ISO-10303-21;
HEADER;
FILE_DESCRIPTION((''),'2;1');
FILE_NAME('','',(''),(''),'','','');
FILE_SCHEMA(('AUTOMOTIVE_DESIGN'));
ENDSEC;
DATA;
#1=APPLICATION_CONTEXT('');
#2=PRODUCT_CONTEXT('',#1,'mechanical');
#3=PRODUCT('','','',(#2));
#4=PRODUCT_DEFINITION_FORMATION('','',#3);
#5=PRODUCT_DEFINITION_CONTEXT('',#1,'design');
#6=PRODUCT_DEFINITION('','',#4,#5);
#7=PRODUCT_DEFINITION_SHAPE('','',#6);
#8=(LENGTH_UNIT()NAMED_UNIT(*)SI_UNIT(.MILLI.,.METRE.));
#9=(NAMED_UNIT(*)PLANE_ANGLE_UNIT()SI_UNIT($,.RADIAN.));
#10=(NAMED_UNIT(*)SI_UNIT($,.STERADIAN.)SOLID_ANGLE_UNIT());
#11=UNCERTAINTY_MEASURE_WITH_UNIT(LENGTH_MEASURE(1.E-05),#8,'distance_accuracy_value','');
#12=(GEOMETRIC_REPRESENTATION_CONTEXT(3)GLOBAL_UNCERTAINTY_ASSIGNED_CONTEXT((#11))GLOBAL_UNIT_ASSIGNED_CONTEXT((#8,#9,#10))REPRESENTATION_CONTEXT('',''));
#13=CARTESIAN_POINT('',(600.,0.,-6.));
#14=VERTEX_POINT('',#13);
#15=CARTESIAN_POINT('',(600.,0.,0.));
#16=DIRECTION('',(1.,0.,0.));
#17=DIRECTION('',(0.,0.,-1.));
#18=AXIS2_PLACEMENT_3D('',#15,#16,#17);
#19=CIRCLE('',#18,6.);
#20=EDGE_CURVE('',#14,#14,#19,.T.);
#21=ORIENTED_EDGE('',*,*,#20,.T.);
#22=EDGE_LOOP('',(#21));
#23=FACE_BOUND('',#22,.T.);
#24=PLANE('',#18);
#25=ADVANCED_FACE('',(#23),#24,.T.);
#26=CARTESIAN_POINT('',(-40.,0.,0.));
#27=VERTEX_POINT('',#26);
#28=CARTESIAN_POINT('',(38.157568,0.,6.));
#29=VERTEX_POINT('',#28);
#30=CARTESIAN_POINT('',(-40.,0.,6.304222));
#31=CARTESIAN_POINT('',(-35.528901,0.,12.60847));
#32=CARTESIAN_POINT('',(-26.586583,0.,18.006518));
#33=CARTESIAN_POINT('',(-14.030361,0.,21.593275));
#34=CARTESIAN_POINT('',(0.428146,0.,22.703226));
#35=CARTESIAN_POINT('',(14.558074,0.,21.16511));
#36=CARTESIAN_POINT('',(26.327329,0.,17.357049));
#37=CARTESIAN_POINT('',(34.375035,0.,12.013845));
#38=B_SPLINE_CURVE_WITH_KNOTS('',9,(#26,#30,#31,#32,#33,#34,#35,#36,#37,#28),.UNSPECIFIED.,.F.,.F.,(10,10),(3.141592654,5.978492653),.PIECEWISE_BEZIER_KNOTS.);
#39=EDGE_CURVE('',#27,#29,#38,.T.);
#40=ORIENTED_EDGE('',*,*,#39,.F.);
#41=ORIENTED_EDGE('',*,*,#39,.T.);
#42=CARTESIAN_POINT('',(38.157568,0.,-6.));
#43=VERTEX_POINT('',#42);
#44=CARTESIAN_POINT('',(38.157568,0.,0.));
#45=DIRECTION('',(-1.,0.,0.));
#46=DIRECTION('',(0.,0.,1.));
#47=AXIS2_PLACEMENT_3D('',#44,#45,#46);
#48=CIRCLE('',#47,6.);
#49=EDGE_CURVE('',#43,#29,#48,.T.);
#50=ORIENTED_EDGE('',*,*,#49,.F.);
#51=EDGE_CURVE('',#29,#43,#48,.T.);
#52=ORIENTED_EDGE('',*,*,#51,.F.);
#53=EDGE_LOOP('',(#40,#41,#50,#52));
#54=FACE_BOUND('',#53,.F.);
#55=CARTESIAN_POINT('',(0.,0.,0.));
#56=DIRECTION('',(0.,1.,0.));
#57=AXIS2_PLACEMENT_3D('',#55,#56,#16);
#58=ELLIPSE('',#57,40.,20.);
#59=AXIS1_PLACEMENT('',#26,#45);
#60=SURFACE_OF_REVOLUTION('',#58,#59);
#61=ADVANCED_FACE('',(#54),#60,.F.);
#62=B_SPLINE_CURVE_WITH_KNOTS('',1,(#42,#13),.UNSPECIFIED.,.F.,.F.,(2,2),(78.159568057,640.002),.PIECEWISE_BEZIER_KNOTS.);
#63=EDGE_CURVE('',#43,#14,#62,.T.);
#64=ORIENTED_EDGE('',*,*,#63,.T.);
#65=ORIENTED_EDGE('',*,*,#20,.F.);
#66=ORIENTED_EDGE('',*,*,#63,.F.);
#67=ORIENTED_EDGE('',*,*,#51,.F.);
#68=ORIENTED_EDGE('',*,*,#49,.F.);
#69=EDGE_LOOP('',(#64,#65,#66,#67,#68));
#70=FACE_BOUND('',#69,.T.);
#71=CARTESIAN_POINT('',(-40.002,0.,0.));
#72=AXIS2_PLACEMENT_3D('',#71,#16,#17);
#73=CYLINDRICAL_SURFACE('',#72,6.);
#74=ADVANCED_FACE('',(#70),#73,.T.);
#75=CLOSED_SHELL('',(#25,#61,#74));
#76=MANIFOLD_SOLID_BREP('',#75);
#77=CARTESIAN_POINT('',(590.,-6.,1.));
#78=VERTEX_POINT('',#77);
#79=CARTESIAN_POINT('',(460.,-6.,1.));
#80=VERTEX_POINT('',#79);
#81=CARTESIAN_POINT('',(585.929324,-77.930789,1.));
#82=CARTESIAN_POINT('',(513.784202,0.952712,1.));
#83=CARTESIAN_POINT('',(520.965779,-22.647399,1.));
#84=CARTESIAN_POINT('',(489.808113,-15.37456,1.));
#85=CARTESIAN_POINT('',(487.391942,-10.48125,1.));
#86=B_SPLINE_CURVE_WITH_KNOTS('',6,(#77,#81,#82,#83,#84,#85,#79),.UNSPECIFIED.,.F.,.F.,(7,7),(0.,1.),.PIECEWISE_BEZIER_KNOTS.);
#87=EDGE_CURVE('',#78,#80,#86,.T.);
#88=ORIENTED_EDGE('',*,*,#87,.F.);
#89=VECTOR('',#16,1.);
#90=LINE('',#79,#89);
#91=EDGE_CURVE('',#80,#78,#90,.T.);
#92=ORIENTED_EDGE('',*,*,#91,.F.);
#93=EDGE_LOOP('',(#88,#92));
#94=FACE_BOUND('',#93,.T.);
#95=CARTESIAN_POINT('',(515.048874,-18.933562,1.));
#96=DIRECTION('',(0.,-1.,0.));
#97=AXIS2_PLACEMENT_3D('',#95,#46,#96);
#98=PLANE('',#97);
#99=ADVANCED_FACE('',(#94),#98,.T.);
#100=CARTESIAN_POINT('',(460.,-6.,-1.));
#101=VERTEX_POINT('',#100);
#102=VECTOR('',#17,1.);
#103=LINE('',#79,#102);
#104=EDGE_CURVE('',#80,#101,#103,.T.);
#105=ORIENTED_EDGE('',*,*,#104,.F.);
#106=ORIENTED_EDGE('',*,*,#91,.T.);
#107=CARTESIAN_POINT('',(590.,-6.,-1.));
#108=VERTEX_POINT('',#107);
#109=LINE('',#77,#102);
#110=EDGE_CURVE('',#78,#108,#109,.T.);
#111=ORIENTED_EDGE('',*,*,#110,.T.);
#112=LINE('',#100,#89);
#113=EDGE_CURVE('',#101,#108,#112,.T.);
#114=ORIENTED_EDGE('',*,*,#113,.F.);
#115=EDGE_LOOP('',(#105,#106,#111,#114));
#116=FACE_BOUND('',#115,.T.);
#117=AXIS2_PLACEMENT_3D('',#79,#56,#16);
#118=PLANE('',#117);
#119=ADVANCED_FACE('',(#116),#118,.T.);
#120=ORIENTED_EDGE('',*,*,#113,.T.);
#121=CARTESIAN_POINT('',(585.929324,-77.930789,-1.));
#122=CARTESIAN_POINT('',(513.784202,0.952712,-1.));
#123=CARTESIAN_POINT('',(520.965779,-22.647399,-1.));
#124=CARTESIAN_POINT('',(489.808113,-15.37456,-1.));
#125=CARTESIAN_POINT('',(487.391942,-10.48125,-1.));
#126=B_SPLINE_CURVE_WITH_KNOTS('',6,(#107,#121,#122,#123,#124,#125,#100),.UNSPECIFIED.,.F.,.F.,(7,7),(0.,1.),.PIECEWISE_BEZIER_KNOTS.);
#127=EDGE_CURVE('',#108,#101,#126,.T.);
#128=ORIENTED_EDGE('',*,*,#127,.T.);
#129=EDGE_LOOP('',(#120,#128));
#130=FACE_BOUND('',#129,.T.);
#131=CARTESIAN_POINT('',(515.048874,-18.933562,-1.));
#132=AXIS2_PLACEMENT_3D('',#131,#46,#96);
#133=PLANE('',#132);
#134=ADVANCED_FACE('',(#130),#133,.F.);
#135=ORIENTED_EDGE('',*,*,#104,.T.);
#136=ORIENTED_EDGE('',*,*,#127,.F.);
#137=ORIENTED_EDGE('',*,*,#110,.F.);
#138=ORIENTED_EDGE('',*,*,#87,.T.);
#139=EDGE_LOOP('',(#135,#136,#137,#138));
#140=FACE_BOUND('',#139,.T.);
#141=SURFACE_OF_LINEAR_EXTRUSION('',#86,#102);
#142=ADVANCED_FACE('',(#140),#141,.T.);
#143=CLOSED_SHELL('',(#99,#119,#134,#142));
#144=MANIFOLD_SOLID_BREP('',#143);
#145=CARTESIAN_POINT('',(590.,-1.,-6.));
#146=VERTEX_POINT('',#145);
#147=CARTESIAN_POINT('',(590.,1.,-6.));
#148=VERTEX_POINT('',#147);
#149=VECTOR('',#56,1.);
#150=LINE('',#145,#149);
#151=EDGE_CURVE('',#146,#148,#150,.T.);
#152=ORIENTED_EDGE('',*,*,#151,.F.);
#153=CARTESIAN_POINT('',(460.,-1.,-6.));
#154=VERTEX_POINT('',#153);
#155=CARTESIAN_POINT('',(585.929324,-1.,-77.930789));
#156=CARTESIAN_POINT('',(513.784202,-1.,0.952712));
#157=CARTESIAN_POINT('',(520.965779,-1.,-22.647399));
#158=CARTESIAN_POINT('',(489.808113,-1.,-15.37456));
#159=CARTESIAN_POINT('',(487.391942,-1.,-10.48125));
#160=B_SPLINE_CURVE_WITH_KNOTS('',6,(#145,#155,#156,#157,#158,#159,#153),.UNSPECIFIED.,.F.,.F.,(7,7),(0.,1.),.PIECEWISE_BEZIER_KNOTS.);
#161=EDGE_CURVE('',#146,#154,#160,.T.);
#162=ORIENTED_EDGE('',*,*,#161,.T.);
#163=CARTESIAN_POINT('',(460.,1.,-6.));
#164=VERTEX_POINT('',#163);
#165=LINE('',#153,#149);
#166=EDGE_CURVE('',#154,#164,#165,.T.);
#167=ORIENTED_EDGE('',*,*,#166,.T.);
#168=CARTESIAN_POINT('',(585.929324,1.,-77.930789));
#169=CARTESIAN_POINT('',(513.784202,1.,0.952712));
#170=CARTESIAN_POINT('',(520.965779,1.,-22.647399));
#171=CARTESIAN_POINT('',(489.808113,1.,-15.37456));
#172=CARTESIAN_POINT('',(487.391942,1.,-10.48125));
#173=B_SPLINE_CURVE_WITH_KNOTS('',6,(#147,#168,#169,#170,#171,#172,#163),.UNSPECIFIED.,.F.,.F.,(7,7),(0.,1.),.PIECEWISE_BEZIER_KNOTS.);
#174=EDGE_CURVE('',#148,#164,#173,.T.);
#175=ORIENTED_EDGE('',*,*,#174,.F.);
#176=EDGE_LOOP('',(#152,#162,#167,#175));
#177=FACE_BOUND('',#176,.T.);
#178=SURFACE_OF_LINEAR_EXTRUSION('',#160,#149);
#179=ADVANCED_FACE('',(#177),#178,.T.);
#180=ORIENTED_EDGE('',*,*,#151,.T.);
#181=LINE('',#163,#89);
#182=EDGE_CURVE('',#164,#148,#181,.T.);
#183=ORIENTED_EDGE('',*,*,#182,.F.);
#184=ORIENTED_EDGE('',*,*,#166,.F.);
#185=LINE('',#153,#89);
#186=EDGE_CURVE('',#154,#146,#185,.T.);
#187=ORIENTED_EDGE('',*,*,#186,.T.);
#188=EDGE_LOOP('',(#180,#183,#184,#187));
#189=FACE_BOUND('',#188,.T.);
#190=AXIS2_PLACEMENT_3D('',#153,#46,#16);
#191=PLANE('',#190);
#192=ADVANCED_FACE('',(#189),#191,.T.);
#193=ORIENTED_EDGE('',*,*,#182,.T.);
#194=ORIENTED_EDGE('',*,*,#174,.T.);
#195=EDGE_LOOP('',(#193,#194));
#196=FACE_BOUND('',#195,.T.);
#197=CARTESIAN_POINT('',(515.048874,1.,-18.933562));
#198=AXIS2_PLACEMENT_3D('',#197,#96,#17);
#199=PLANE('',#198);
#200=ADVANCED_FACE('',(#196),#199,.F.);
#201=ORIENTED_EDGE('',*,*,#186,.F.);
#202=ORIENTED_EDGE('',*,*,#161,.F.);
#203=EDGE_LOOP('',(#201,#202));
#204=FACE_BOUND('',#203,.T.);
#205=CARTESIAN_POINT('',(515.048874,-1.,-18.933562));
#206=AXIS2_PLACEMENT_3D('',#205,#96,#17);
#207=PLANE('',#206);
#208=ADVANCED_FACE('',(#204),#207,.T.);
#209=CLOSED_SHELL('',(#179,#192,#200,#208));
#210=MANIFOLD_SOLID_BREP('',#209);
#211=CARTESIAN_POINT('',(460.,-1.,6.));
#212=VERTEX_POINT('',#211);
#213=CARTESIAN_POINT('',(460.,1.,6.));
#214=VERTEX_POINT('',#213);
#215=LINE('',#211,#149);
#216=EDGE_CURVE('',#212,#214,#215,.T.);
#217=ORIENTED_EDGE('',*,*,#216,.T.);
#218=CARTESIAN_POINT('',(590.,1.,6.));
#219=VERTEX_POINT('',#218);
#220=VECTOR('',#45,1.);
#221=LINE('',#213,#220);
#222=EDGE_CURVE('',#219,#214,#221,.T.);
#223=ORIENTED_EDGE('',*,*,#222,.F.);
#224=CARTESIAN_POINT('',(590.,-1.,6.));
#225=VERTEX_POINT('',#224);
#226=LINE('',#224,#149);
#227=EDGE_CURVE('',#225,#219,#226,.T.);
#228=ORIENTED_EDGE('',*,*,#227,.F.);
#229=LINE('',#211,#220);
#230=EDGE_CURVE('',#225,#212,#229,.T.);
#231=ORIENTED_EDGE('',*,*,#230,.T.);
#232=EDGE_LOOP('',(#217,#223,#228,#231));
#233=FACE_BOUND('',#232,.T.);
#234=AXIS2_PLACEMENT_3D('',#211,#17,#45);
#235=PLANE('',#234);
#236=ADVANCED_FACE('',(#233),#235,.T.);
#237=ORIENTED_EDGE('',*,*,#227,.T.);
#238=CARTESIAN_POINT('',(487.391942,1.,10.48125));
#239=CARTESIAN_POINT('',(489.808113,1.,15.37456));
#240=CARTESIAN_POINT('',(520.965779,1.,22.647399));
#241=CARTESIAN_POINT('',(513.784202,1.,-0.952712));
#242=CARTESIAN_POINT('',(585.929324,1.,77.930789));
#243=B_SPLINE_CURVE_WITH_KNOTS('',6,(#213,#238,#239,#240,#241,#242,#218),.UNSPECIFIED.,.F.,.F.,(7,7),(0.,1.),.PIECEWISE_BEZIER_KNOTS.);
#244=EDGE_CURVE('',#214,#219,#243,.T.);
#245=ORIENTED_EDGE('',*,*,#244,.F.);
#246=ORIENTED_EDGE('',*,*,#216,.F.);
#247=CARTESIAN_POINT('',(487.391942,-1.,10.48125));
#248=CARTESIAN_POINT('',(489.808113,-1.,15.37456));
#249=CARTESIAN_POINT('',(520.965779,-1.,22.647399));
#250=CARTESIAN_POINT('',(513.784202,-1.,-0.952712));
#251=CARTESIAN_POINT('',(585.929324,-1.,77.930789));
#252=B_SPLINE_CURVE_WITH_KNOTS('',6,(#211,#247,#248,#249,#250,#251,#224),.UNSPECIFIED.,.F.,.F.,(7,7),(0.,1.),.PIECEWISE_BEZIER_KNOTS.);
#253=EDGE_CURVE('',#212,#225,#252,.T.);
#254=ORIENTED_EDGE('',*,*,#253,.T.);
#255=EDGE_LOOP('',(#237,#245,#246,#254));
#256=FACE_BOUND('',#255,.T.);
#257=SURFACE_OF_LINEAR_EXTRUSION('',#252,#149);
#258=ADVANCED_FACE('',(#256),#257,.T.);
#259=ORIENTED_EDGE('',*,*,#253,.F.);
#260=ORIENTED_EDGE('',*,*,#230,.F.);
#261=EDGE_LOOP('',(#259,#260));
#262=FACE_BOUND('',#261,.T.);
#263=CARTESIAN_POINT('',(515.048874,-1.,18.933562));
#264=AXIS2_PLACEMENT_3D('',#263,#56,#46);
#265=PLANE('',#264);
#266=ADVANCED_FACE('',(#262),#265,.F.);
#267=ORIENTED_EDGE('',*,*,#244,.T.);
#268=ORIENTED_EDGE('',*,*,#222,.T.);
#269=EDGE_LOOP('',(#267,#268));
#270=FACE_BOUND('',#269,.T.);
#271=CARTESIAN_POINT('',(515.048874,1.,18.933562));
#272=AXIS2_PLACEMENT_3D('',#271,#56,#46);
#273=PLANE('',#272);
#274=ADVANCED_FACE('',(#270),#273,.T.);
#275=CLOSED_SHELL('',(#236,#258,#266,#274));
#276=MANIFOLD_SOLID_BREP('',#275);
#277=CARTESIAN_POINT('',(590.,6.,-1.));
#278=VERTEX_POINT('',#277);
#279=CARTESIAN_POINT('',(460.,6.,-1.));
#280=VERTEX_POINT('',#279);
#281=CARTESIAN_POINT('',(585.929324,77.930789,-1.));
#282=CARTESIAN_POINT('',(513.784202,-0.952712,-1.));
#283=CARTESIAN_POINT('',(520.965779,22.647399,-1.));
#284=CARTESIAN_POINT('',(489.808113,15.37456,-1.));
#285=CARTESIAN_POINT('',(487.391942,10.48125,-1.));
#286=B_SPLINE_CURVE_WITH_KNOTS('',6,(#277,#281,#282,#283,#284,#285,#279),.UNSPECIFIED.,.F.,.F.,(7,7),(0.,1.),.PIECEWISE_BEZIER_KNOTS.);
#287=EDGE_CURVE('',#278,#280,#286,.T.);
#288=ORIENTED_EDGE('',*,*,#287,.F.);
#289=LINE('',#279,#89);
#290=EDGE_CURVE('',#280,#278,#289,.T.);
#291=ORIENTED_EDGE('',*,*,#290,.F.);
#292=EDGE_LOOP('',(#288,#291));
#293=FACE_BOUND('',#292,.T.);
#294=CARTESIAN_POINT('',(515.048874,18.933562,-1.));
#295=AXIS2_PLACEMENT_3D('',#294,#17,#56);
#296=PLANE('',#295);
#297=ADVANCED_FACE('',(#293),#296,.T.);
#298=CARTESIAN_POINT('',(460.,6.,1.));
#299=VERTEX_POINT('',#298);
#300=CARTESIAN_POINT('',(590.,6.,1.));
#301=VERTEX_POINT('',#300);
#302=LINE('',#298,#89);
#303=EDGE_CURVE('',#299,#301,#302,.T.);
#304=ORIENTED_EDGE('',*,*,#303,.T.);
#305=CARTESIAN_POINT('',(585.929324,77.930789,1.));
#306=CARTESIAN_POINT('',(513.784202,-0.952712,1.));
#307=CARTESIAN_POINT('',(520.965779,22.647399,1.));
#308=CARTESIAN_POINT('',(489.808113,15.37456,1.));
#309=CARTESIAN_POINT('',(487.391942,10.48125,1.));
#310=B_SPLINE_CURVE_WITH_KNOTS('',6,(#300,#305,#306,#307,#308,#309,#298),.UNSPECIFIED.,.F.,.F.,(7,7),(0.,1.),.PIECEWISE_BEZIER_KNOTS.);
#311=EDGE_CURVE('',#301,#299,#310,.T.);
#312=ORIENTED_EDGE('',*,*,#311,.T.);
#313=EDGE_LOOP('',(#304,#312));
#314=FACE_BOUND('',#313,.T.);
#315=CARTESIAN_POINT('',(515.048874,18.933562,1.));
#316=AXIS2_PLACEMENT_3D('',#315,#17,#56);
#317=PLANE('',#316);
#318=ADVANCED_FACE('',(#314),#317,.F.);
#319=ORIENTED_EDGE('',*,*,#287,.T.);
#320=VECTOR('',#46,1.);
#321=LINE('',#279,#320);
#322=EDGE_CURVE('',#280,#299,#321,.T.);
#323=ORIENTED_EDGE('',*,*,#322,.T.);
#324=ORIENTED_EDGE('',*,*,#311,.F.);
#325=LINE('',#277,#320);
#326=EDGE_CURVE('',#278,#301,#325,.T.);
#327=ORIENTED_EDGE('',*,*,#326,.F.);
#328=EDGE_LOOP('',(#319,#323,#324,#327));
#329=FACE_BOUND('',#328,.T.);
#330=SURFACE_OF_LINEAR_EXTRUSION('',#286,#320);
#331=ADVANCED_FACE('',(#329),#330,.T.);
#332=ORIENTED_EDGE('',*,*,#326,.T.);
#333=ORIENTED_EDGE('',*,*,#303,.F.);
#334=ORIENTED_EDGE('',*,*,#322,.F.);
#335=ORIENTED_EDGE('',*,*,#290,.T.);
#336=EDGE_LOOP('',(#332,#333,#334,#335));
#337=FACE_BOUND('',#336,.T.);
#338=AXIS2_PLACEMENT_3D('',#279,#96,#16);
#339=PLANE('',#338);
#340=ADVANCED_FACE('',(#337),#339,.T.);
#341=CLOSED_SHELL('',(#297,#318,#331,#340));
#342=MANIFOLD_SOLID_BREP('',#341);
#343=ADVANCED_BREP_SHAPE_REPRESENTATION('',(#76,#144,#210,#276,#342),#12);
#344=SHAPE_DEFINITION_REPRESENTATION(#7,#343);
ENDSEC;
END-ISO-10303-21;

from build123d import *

# Parameters (mm, degrees)
BOSS_EXTRUDE1_REACH = 642.625
SKETCH2_R           = 6
BOSS_EXTRUDE2_START = -1
BOSS_EXTRUDE2_DEPTH = 2
CIRPATTERN1_COUNT   = 2
CIRPATTERN1_ANGLE   = 90


# Read off the part's stored shape, not the designer's step: Boss-Extrude2
with BuildPart() as part:
    # Sketch1 → Revolve1 (revolve)
    with BuildSketch(Plane(origin=(0, 0, 0), x_dir=(1, 0, 0), z_dir=(0, 1, 0))):
        with BuildLine():
            Line((-40, 0), (40, 0))
            add(Edge.make_bspline(
                [(-40, 0), (-40, -20), (0, -20), (40, -20), (40, 0)],
                knots=[3.141592654, 3.141592654, 3.141592654, 4.71238898, 4.71238898, 6.283185307, 6.283185307, 6.283185307], degree=2, weights=[1, 0.707106781, 1, 0.707106781, 1]))
        make_face()
    revolve(axis=Axis((-40, 0, 0), (1, 0, 0)))

    # Sketch2 → Boss-Extrude1 (add, up to next)
    with BuildSketch(Plane(origin=(600, 0, 0), x_dir=(0, 0, -1), z_dir=(1, 0, 0)), mode=Mode.PRIVATE) as boss_extrude1_sk1:
        Circle(SKETCH2_R)
    boss_extrude1_tool1 = extrude(boss_extrude1_sk1.sketch, amount=-BOSS_EXTRUDE1_REACH, mode=Mode.PRIVATE) - part.part
    add(boss_extrude1_tool1.solids().sort_by_distance((600, 0, 0))[0])


with BuildPart() as body_2:
    # Boss-Extrude2 outline → Boss-Extrude2 (new body)
    with BuildSketch(Plane(origin=(0, 0, 0), x_dir=(1, 0, 0), z_dir=(0, 1, 0)).offset(BOSS_EXTRUDE2_START)):
        with BuildLine():
            Line((590, -6), (460, -6))
            add(Edge.make_bspline(
                [(460, -6), (487.39194151, -10.48125039), (489.808113242, -15.374560028), (520.965779305, -22.647398554), (513.784202435, 0.952711564), (585.929324234, -77.930789309), (590, -6)],
                knots=[0, 0, 0, 0, 0, 0, 0, 1, 1, 1, 1, 1, 1, 1], degree=6))
        make_face()
        with BuildLine():
            Line((460, 6), (590, 6))
            add(Edge.make_bspline(
                [(590, 6), (585.929324234, 77.930789309), (513.784202435, -0.952711564), (520.965779305, 22.647398554), (489.808113242, 15.374560028), (487.39194151, 10.48125039), (460, 6)],
                knots=[0, 0, 0, 0, 0, 0, 0, 1, 1, 1, 1, 1, 1, 1], degree=6))
        make_face()
    extrude(amount=BOSS_EXTRUDE2_DEPTH)


with BuildPart() as cirpattern1_1:
    # CirPattern1: pattern copy
    add(body_2.part.rotate(Axis((-40.002, 0, 0), (1, 0, 0)), 1 * CIRPATTERN1_ANGLE / (CIRPATTERN1_COUNT - 1)))


solid = Compound([part.part, body_2.part, cirpattern1_1.part])
